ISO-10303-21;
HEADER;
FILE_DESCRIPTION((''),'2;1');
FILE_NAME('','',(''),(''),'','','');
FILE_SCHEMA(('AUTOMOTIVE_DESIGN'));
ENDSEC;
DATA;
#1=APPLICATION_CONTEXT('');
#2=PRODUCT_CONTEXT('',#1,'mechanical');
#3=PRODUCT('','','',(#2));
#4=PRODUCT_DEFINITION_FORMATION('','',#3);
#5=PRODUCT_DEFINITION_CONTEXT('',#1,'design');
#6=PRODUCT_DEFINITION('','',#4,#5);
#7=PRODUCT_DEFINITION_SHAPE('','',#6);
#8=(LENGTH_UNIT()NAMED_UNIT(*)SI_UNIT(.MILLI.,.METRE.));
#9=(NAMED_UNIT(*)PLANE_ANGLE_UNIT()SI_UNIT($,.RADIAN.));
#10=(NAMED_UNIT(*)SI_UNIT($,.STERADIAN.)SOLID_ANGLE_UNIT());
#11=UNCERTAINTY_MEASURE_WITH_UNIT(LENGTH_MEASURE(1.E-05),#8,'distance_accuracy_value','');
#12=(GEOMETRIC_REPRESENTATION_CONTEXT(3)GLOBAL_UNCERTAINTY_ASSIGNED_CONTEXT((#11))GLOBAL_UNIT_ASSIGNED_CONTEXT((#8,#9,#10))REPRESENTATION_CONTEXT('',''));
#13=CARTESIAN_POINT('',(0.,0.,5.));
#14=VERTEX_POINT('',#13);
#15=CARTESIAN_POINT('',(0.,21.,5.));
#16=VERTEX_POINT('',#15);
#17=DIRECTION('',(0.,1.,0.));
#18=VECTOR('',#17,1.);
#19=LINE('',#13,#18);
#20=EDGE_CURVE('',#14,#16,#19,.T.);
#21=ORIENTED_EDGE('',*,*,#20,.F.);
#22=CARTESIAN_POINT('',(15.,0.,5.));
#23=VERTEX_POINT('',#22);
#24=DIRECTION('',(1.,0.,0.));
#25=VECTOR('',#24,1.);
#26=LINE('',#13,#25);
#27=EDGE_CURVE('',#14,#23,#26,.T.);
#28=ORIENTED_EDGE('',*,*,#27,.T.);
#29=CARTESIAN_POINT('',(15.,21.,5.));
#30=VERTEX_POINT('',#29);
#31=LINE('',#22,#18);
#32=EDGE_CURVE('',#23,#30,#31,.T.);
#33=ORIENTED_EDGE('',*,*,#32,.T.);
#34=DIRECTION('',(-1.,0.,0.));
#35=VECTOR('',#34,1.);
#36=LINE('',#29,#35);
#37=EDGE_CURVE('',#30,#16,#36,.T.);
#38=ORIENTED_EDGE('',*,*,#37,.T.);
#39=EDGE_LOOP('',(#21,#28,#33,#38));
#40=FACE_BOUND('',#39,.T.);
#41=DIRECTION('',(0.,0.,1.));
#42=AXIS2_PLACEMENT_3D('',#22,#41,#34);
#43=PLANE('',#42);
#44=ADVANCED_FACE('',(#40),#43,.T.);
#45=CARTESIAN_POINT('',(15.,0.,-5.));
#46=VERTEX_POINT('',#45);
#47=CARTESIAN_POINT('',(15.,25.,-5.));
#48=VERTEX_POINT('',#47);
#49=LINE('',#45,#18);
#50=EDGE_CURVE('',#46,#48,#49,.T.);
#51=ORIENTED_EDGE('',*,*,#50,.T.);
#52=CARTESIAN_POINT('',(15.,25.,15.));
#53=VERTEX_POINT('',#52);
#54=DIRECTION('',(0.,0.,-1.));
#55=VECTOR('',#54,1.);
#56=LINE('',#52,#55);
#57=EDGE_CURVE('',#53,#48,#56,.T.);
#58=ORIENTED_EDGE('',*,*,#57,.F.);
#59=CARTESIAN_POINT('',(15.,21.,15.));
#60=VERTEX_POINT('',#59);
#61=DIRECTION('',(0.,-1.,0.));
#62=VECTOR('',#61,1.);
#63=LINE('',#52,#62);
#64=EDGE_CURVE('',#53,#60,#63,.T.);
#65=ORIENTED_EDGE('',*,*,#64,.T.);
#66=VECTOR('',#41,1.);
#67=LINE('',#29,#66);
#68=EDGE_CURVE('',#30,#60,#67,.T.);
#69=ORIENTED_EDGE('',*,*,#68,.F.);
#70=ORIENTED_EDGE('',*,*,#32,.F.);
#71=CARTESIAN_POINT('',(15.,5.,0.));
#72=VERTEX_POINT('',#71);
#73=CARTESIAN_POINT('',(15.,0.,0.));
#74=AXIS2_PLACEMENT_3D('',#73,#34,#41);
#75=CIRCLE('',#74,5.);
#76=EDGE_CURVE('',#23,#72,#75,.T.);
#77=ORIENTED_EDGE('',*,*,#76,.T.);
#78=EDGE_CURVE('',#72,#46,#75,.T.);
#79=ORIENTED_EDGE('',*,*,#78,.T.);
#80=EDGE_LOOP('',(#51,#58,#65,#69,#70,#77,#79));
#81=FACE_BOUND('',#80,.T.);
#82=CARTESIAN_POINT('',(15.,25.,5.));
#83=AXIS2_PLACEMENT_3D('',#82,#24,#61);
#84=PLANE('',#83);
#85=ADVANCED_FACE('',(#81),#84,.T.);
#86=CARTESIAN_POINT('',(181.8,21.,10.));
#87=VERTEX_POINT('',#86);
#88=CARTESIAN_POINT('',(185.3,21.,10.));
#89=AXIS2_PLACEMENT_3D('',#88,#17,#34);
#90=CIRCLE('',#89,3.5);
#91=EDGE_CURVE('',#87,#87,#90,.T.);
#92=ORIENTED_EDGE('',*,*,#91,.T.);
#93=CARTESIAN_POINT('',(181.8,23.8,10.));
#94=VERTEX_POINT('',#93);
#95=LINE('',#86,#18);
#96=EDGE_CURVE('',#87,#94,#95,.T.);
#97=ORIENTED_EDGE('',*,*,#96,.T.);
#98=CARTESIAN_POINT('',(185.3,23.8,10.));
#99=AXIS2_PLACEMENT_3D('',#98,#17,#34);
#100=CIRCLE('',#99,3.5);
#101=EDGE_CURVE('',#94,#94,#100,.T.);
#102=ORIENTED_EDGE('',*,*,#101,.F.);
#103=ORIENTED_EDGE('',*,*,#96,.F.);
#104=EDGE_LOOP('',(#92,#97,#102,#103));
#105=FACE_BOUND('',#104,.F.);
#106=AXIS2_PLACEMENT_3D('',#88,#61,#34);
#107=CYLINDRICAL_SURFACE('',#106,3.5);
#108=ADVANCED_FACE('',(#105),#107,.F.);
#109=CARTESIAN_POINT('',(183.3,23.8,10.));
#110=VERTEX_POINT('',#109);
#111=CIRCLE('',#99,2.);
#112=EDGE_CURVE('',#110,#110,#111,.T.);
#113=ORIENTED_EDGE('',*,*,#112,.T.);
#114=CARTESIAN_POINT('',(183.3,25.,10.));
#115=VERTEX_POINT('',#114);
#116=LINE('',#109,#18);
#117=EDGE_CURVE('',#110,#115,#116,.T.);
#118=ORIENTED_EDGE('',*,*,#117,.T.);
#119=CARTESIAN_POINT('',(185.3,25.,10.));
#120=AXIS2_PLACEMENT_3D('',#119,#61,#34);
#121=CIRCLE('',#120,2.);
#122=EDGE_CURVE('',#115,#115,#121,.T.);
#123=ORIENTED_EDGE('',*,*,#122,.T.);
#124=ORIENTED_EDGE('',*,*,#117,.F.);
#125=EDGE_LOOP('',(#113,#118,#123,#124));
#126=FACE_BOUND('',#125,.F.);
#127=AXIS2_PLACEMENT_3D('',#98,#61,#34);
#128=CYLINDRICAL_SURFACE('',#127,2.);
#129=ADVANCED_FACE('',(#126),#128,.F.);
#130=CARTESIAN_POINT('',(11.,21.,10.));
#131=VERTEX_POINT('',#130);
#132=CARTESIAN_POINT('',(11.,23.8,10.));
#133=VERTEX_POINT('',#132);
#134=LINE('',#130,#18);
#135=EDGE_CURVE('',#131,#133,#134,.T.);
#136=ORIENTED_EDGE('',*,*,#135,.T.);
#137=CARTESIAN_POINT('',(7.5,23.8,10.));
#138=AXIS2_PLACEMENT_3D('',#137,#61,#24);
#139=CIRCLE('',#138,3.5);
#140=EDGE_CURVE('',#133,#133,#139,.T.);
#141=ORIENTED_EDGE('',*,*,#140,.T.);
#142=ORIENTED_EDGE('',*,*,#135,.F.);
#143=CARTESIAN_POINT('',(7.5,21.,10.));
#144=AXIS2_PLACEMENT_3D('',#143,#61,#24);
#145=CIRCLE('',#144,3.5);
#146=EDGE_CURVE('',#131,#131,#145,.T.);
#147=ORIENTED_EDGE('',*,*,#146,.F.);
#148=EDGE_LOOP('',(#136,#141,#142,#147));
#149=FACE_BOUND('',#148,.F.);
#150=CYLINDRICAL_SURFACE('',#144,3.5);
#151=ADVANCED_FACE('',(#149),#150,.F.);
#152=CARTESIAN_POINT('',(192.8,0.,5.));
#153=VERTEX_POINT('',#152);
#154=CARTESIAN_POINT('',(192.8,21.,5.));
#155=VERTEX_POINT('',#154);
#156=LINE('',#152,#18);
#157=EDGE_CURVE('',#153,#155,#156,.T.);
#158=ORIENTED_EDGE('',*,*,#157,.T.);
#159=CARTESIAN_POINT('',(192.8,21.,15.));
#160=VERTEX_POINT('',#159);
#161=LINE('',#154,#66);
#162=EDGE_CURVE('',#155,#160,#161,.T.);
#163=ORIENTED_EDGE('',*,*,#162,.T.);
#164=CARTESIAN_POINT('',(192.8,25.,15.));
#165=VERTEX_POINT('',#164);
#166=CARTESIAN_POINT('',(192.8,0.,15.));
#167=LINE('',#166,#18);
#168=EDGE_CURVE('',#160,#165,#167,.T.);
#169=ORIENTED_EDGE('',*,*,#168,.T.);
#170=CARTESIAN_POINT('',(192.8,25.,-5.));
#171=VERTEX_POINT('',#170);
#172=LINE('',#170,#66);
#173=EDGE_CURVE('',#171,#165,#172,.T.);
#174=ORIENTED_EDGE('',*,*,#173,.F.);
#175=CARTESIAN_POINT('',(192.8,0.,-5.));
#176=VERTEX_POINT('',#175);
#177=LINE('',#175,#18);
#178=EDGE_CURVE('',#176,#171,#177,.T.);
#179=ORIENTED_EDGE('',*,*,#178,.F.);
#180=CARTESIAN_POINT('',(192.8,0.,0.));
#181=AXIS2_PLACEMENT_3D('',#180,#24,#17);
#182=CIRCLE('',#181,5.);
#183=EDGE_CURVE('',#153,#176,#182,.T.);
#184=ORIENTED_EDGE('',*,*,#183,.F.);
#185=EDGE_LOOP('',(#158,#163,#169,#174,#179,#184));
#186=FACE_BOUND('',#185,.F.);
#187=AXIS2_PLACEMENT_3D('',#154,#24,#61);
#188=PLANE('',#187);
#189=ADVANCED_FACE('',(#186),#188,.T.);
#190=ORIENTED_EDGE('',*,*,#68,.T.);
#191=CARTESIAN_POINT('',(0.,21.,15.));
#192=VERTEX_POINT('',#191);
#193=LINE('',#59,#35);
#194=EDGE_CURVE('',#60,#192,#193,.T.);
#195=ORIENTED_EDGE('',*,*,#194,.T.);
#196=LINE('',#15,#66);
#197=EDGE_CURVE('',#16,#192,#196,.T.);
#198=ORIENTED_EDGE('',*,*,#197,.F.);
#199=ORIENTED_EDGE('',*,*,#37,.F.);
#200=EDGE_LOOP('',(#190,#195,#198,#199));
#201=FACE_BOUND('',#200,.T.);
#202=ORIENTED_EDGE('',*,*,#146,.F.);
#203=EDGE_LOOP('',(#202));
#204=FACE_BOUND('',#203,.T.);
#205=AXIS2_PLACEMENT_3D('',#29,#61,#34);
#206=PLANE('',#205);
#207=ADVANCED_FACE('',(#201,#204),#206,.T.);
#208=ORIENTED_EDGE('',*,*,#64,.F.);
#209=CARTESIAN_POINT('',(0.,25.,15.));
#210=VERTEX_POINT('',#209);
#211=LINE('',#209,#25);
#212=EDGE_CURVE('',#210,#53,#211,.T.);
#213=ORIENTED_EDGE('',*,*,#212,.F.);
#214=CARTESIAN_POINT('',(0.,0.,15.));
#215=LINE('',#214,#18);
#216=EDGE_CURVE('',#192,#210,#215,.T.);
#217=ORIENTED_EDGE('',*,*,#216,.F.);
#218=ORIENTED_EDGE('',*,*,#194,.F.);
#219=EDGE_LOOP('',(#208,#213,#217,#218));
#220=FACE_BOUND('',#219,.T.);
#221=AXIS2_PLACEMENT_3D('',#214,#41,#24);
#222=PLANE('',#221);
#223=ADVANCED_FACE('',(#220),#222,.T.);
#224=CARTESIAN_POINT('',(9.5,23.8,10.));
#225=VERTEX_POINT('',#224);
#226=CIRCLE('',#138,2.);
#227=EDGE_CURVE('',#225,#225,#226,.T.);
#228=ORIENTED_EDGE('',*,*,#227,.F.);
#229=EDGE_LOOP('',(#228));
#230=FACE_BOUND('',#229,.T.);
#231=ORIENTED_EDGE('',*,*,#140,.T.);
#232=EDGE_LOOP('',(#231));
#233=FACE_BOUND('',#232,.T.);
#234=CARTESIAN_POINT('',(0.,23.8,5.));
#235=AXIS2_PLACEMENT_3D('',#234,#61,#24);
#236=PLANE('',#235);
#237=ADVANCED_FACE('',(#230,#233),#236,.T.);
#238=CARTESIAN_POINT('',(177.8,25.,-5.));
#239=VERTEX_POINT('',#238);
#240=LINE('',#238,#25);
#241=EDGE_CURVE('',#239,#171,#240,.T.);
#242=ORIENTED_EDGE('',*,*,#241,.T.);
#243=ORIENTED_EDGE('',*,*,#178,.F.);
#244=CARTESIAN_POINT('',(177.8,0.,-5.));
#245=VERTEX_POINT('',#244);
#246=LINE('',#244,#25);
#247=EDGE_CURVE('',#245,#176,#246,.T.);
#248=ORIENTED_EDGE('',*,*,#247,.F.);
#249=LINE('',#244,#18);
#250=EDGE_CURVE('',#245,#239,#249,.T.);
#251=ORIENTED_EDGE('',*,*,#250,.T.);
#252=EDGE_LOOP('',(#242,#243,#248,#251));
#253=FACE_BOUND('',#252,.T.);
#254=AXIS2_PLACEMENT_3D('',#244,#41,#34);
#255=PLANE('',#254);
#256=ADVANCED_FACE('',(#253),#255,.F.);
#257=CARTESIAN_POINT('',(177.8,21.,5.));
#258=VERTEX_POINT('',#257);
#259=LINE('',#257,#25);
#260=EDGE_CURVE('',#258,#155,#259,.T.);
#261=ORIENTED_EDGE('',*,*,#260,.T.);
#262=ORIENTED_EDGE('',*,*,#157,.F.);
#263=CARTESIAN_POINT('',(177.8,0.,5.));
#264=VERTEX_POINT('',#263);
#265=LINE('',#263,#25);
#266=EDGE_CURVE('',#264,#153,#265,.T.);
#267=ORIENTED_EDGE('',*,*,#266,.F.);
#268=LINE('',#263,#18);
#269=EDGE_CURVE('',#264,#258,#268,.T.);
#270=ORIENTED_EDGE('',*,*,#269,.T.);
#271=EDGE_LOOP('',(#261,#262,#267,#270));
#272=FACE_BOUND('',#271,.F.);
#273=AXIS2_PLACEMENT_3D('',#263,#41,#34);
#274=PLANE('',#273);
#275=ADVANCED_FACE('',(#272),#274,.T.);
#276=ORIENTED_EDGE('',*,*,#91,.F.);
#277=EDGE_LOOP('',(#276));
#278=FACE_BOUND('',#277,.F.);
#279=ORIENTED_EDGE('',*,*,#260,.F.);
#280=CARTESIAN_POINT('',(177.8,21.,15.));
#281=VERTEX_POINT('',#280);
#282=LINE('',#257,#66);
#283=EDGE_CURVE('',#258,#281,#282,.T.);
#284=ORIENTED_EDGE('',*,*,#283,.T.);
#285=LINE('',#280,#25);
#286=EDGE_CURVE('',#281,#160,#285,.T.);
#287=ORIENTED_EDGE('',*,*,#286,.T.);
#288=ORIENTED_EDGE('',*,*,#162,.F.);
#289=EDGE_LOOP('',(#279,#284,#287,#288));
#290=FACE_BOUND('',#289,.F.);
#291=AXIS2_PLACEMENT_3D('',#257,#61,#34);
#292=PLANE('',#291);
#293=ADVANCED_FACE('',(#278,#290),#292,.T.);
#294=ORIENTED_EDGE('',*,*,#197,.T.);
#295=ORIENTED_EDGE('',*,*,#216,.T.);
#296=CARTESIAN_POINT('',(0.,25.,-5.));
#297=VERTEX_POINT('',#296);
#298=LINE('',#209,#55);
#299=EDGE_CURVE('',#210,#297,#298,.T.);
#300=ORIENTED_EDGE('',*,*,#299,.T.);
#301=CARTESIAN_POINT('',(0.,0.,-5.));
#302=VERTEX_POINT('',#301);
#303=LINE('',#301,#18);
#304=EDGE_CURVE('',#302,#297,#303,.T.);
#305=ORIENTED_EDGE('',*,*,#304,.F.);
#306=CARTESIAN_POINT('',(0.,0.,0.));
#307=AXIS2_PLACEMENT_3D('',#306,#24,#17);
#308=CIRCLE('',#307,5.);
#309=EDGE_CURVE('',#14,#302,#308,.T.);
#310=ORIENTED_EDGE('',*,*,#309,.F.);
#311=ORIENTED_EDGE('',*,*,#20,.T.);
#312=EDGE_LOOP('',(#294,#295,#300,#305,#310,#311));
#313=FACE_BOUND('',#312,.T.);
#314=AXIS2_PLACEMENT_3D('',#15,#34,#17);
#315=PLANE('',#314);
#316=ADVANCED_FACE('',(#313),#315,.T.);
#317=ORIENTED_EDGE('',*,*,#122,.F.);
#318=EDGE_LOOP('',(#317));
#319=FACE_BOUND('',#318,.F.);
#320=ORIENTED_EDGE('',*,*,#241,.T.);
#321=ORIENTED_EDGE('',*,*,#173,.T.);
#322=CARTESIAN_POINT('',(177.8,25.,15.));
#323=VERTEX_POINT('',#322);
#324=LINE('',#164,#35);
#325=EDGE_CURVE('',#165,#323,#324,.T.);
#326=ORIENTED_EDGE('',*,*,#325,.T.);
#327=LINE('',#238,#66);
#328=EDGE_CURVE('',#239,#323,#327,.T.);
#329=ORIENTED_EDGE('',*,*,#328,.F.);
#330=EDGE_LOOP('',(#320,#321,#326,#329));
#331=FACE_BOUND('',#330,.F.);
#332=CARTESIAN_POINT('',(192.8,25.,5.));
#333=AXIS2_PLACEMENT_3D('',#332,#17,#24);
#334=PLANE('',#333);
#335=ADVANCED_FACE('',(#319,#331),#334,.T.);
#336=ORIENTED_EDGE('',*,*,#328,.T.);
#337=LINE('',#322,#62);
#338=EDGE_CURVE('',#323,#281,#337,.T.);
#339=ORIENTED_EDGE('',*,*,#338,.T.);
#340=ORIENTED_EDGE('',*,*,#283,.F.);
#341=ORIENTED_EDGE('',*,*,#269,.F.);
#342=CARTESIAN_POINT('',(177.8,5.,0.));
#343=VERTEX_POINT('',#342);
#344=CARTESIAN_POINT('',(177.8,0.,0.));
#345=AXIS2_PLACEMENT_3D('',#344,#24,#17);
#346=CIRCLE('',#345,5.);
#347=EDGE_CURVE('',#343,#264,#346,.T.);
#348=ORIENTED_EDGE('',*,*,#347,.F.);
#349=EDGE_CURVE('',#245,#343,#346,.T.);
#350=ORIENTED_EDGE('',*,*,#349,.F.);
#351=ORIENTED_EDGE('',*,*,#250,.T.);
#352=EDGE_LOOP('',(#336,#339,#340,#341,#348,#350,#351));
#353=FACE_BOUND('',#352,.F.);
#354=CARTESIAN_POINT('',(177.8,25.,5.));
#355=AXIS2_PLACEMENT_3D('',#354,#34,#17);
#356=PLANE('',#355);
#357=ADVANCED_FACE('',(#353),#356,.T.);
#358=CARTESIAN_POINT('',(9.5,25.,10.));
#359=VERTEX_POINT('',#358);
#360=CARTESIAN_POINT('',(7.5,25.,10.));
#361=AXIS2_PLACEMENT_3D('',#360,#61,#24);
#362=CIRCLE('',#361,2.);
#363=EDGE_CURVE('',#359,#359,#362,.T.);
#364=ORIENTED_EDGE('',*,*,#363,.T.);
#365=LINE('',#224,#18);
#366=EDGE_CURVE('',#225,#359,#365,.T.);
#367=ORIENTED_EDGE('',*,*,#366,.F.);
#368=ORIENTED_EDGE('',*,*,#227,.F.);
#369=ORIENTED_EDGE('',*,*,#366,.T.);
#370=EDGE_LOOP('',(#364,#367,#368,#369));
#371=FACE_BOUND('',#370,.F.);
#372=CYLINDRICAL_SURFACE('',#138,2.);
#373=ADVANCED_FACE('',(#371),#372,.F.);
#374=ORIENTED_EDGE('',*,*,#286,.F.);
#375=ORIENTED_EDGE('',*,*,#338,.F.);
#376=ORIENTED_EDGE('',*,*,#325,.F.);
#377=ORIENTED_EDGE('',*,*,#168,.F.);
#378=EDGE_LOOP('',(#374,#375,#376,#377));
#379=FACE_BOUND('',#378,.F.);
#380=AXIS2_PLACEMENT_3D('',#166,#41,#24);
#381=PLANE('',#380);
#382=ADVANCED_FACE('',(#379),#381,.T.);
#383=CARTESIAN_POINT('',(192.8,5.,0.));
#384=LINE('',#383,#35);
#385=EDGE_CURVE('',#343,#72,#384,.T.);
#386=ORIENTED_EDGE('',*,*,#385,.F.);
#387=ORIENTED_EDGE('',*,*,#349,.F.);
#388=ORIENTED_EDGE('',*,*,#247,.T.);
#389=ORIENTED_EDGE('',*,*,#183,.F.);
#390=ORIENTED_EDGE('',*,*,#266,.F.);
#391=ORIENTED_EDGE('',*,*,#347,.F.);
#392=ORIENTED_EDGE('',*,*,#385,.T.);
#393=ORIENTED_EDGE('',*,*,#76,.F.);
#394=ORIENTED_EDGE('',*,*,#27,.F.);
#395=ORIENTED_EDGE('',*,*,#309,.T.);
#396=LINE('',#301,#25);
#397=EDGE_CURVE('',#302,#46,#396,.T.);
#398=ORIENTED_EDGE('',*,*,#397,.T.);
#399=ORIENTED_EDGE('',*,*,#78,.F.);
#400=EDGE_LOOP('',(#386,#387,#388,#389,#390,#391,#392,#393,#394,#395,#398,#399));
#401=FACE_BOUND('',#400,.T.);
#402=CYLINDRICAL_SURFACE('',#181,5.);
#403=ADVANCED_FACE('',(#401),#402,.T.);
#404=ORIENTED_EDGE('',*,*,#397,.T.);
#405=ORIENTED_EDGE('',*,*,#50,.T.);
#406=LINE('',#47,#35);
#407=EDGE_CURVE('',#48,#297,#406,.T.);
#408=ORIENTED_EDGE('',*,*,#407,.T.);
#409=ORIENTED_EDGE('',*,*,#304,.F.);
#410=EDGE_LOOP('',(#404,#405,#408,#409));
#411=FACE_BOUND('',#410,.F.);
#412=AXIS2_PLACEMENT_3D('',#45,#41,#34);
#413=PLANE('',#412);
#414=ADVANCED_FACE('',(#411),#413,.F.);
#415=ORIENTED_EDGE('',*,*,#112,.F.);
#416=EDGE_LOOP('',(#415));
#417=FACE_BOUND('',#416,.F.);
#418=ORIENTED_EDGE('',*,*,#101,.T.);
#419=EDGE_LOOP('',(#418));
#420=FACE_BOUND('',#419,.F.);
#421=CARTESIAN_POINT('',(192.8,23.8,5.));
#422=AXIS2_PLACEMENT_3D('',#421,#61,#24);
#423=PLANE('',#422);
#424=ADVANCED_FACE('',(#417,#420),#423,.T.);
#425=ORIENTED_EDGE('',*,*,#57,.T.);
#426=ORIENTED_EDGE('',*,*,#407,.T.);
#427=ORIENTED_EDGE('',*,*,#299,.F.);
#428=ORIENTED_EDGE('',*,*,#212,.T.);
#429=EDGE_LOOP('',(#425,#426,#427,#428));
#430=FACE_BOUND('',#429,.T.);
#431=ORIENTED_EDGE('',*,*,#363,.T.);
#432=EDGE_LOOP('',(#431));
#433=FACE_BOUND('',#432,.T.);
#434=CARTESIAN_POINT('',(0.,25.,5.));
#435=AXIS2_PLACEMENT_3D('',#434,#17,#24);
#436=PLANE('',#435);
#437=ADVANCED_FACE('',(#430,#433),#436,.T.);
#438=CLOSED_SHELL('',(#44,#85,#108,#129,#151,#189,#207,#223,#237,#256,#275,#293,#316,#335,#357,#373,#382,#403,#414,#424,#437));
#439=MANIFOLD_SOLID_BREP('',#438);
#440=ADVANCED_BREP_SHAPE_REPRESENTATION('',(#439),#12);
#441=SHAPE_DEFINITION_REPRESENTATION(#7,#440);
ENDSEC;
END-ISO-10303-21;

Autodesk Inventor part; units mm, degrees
ref_plane "YZ Plane" through (0, 0, 0) normal (1, 0, 0) x (0, 1, 0)
ref_plane "XZ Plane" through (0, 0, 0) normal (0, 1, 0) x (-1, 0, 0)
ref_plane "XY Plane" through (0, 0, 0) normal (0, 0, 1) x (1, 0, 0)
sketch "Sketch1" plane through (0, 0, 0) normal (0, 0, 1) x (1, 0, 0)
  point P0 (0, 0)
sketch "Sketch2" plane through (0, 0, 0) normal (1, 0, 0) x (0, 1, 0)
  circle A0 centre (0, 0) radius 5
  dimension "d0" = 10
extrude "Extrusion1" add sketch "Sketch2" along normal blind 96.4
sketch "Sketch3" plane through (0, 0, 0) normal (-1, 0, 0) x (0, 0, 1)
  circle A0 centre (0, 0) radius 5 projected
  line L0 (-5, 0) -> (5, 0)
  arc A1 (5, 0) -> (-5, 0) centre (0, 0) ccw
  dimension "d3" = 5
extrude "Extrusion2" cut sketch "Sketch3" against normal blind 15 contours L0 A0 picked at (1.2475, 1.1052)
sketch "Sketch4" plane through (0, 0, 5) normal (0, 1, 0) x (1, 0, 0)
  line L0 (15, 0) -> (0, 0) projected
  line L1 (15, 0) -> (15, 10) projected
  line L2 (0, 0) -> (15, 0)
  line L3 (15, 0) -> (15, 10)
  line L4 (15, 10) -> (0, 10)
  line L5 (0, 10) -> (0, 0)
  point P0 (0, 5)
extrude "Extrusion3" add sketch "Sketch4" along normal blind 25
sketch "Sketch5" plane through (0, 0, 5) normal (0, 0, 1) x (1, 0, 0)
  line L0 (0, 0) -> (0, 25) projected
  line L1 (0, 25) -> (15, 25)
  line L2 (15, 25) -> (15, 21)
  line L3 (15, 21) -> (0, 21)
  line L4 (0, 21) -> (0, 25)
  point P0 (0, 21)
  dimension "d8" = 4
  dimension "d9" = 15
extrude "Extrusion4" add sketch "Sketch5" along normal blind 10
sketch "Sketch6" plane through (0, 21, 5) normal (0, -1, 0) x (1, 0, 0)
  circle A0 centre (7.5, 5) radius 3.5
  line L0 (0, 0) -> (0, 10) projected
  line L1 (15, 0) -> (0, 0) projected
  point P0 (0, -5)
  dimension "d12" = 7
  dimension "d13" = 7.5
  dimension "d14" = 5
extrude "Extrusion5" cut sketch "Sketch6" against normal blind 2.8
sketch "Sketch7" plane through (7.5, 23.8, 10) normal (0, -1, 0) x (1, 0, 0)
  circle A0 centre (0, 0) radius 2
  line L0 (-7.5, -5) -> (-7.5, 5) projected
  line L1 (7.5, -5) -> (-7.5, -5) projected
  point P0 (-7.5, -10)
  dimension "d17" = 7.5
  dimension "d18" = 5
  dimension "d19" = 4
extrude "Extrusion6" cut sketch "Sketch7" against normal through all
mirror "Mirror1" about plane through (96.4, 0, 0) normal (1, 0, 0) of "Extrusion5", "Extrusion6", "Extrusion4", "Extrusion3", "Extrusion1"
properties part number "Supporting-Rod"
